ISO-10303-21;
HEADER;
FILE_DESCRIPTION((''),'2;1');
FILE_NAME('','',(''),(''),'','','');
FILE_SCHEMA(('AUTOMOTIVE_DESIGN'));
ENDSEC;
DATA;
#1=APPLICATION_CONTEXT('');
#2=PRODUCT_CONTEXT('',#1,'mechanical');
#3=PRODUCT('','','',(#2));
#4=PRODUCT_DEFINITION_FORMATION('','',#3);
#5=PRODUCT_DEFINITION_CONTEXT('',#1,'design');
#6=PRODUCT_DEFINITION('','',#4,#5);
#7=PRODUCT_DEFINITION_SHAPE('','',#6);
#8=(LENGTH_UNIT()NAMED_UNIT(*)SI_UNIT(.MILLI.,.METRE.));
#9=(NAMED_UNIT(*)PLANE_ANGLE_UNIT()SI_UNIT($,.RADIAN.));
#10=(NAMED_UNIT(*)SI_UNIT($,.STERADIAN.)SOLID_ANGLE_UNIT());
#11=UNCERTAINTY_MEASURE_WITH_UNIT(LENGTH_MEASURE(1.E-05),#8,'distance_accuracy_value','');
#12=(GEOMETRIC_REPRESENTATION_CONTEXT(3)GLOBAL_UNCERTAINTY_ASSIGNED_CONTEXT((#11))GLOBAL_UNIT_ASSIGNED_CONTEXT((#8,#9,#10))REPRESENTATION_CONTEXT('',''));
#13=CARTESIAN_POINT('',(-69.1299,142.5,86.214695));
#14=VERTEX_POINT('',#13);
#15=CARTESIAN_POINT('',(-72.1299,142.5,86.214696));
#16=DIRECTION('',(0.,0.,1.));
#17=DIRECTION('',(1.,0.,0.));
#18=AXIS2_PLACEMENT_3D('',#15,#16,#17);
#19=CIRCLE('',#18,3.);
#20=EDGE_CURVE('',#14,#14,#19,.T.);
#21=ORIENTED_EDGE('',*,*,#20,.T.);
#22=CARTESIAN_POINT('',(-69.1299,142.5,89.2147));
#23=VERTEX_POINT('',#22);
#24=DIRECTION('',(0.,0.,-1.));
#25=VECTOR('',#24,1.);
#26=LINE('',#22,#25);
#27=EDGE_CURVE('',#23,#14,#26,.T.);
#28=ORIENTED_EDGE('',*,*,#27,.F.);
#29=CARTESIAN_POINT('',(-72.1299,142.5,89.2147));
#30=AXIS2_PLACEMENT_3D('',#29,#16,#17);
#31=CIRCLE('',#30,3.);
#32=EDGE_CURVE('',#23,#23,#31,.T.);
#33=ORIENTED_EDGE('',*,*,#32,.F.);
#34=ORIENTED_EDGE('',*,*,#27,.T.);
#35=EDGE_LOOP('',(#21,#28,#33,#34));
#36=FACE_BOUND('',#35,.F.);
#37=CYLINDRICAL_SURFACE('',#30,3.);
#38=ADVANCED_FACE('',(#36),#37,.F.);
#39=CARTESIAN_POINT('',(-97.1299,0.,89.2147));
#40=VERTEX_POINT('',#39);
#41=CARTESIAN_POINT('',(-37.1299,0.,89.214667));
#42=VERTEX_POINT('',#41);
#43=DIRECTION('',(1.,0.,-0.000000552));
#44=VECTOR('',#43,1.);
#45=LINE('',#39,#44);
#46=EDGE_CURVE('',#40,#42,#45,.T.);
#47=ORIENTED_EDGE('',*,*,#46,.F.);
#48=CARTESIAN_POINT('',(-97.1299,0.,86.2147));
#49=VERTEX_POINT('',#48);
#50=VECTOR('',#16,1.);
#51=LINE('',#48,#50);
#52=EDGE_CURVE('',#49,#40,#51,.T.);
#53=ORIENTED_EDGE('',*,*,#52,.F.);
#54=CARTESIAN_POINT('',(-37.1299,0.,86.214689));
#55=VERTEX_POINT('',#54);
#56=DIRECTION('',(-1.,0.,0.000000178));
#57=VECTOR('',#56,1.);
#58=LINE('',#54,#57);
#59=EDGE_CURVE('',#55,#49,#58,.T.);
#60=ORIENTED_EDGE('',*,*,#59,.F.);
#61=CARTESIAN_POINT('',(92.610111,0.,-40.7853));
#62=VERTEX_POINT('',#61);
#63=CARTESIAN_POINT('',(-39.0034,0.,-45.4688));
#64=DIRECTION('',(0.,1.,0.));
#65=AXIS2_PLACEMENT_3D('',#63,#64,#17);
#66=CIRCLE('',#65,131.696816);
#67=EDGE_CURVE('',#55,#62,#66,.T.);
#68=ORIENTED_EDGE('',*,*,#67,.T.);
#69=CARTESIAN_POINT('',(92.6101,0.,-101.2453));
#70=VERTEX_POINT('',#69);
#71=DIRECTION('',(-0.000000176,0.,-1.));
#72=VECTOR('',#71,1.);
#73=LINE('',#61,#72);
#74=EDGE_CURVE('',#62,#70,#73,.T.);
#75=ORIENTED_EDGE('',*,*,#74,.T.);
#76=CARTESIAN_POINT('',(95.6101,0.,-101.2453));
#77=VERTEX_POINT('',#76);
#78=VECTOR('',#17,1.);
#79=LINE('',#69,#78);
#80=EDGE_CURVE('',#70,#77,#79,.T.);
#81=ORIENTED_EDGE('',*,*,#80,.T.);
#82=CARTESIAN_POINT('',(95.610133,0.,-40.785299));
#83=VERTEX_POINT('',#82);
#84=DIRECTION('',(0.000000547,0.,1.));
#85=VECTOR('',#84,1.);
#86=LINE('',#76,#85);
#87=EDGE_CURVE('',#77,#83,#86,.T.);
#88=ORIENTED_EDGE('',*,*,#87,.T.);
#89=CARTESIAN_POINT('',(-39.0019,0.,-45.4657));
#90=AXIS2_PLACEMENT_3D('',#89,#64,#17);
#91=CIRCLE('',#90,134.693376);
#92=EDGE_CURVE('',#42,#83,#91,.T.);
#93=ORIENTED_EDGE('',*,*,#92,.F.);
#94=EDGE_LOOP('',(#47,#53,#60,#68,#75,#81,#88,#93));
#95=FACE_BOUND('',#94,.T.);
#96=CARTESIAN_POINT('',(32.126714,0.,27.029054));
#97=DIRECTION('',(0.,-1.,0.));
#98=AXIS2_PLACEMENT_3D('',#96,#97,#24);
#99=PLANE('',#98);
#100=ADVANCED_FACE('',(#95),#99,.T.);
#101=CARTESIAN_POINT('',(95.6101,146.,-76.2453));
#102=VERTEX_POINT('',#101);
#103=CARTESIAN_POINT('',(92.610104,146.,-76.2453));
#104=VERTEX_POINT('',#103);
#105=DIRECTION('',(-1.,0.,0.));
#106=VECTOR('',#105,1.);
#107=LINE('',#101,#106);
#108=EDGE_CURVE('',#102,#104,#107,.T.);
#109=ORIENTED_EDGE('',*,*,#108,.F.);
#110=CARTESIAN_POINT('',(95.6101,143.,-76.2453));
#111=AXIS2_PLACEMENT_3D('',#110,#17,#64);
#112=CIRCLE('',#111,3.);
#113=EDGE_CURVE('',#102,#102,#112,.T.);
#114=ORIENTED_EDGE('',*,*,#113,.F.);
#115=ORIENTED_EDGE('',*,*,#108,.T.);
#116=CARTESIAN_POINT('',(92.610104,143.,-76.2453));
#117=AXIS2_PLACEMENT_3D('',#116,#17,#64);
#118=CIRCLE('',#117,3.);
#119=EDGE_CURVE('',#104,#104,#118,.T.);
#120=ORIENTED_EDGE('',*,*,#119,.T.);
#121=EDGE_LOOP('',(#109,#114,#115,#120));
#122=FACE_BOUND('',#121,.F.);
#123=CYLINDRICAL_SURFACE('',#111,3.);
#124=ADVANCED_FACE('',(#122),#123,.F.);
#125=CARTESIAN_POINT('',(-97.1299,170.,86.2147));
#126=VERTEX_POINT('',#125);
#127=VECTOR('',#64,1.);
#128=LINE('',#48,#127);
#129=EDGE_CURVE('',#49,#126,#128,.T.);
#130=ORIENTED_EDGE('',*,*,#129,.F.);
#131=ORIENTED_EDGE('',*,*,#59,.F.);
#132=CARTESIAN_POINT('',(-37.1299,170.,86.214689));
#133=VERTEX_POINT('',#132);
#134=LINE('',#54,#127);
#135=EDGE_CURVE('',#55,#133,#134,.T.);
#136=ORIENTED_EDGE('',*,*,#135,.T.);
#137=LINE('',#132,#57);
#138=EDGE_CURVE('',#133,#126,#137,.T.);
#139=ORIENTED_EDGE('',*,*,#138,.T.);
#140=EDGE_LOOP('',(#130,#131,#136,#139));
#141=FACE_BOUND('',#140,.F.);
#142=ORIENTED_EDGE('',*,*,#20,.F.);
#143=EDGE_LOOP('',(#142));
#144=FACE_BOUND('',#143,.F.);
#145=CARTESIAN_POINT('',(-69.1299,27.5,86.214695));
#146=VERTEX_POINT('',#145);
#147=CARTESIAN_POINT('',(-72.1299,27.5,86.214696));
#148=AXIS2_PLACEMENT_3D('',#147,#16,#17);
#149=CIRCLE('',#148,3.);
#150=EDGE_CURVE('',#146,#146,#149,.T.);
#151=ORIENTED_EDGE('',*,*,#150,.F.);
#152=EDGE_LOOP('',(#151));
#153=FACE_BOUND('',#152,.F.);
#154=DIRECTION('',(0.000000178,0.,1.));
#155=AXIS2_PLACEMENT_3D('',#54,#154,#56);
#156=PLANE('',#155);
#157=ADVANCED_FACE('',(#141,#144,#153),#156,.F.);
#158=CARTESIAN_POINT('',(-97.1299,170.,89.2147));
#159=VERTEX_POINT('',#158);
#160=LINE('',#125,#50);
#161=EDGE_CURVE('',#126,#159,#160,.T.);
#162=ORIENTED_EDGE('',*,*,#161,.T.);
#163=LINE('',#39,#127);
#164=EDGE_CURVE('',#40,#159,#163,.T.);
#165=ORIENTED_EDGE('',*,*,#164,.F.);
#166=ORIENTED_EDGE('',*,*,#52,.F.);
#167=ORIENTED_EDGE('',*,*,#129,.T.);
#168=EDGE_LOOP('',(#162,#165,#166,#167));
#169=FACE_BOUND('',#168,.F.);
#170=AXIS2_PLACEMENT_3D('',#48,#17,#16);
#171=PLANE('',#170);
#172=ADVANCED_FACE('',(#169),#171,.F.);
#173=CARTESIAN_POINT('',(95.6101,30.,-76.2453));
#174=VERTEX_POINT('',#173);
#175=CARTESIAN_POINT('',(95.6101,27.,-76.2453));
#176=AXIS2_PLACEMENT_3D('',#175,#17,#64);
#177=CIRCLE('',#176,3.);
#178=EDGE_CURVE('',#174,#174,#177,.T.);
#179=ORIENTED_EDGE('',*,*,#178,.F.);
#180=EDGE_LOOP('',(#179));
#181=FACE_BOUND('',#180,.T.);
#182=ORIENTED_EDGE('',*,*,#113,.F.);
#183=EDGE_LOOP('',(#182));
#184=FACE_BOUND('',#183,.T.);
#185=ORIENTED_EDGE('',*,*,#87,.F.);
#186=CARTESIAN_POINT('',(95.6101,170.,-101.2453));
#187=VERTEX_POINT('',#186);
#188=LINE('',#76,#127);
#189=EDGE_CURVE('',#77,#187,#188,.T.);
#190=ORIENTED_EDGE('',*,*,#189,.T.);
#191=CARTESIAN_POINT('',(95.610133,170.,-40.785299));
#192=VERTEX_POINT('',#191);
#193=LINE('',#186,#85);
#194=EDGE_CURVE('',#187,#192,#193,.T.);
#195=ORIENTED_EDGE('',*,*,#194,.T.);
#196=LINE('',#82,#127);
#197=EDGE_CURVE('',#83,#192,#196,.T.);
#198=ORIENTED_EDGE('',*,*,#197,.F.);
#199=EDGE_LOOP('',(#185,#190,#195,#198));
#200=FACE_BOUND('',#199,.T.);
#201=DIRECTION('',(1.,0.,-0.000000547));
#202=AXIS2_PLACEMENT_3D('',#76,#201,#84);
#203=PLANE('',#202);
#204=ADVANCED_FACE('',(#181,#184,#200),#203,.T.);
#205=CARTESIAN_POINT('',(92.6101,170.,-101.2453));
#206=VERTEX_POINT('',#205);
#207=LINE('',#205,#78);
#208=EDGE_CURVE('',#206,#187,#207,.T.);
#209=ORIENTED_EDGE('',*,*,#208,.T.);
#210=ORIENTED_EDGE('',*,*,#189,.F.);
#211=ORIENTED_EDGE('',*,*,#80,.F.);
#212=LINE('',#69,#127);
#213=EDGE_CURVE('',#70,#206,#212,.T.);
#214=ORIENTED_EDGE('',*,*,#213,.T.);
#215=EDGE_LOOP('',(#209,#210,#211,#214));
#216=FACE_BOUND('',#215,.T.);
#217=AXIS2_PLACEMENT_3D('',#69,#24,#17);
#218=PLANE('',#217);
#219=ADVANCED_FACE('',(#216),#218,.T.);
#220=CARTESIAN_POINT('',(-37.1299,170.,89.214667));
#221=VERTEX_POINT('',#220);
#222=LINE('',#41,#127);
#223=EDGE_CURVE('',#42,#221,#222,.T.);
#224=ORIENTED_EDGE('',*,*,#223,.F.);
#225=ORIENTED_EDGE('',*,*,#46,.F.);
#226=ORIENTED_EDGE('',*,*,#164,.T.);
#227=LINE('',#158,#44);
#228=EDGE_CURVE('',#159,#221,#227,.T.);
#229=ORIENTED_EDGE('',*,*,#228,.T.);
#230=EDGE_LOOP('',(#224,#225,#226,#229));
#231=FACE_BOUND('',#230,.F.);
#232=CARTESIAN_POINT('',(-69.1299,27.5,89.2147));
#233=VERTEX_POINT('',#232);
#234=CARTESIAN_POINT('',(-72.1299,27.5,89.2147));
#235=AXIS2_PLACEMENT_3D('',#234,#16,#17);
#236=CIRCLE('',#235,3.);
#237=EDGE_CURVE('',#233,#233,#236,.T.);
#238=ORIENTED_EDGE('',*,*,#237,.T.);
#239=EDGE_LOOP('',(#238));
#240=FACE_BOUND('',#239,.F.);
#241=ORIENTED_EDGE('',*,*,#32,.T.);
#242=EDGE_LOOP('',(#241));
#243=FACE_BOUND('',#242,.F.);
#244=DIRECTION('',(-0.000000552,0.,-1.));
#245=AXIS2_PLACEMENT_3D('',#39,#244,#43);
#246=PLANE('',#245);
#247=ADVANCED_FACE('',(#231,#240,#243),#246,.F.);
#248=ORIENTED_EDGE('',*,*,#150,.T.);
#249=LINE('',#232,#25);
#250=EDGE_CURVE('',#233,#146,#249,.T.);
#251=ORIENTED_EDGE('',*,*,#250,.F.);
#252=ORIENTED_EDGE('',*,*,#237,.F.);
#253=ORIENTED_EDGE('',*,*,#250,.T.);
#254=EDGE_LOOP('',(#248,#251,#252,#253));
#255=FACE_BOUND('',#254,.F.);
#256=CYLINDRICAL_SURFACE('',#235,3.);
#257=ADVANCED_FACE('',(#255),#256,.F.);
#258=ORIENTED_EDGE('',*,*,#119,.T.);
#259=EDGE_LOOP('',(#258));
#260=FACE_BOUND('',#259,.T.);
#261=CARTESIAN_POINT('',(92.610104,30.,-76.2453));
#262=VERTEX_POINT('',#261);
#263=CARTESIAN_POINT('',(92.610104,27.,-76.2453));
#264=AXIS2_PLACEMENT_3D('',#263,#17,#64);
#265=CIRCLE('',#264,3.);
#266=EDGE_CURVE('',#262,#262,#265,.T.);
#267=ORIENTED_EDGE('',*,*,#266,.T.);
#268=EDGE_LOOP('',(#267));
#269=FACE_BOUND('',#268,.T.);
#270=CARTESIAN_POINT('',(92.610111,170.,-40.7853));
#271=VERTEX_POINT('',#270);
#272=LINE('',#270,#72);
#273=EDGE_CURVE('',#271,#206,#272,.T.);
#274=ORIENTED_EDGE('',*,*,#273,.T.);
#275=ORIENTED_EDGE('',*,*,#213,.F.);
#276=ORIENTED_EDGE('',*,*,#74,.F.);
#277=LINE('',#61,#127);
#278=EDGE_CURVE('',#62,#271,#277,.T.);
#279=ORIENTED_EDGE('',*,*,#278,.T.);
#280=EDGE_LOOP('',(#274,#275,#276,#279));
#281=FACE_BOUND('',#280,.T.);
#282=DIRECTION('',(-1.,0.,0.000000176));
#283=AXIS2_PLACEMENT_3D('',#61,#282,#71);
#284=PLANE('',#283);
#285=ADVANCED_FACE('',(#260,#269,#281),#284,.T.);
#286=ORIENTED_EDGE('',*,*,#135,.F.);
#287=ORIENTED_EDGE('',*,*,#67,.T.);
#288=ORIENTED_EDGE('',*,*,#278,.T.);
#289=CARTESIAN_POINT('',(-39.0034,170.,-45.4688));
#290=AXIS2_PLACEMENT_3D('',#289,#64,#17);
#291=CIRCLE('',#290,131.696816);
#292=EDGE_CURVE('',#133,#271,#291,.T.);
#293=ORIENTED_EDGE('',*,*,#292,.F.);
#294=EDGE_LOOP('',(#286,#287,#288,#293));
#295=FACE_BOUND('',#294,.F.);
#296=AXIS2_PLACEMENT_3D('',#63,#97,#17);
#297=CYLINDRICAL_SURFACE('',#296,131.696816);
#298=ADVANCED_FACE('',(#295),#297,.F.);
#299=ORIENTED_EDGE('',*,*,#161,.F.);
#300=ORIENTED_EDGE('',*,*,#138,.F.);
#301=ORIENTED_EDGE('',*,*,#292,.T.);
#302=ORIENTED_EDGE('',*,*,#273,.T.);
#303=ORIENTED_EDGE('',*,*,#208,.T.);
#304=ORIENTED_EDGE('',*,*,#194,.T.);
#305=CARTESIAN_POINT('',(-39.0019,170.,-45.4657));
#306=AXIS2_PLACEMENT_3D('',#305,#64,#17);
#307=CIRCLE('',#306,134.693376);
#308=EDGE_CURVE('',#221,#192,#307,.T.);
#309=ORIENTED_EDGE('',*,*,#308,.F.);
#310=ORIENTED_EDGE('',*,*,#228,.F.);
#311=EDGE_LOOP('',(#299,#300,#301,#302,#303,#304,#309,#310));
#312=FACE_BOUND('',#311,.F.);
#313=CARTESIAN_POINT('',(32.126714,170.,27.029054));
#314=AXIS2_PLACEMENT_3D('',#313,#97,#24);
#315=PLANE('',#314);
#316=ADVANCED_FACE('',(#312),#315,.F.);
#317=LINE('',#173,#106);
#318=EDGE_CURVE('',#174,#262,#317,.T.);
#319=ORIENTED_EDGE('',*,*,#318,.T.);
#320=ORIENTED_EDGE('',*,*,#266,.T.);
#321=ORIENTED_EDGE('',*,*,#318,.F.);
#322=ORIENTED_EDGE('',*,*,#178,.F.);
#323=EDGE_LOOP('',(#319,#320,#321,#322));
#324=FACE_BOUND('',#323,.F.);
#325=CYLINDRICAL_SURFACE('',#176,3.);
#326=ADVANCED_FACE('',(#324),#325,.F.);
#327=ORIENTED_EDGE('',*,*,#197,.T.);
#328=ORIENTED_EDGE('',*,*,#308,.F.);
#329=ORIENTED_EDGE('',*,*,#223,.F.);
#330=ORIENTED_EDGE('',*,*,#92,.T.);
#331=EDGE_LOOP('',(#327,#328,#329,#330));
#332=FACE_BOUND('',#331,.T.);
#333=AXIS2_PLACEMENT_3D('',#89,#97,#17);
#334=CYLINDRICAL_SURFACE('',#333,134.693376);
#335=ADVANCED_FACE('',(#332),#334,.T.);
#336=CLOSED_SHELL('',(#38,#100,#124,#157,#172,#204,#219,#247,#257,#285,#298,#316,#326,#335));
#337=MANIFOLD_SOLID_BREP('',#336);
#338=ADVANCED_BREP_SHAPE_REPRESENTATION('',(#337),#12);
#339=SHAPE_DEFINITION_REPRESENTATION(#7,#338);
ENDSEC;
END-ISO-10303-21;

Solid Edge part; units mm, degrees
sketch "Sketch1" plane through (0, 0, 0) normal (0, -1, 0) x (1, 0, 0)
  arc A0 (-37.1299, 86.2147) -> (92.6101, -40.7853) centre (-39.0034, -45.4688) cw
  line L0 (92.6101, -40.7853) -> (92.6101, -101.2453)
  line L1 (92.6101, -101.2453) -> (95.6101, -101.2453)
  line L2 (95.6101, -101.2453) -> (95.6101, -40.7853)
  arc A1 (-37.1299, 89.2147) -> (95.6101, -40.7853) centre (-39.0019, -45.4657) cw
  line L3 (-97.1299, 89.2147) -> (-37.1299, 89.2147)
  line L4 (-97.1299, 86.2147) -> (-97.1299, 89.2147)
  line L5 (-37.1299, 86.2147) -> (-97.1299, 86.2147)
  dimension "D1" = 129.74
  dimension "D2" = 127
  dimension "D3" = 60
  dimension "D4" = 60.46
  dimension "D5" = 3
  dimension "D6" = 3
  dimension "D7" = 3
extrude "Protrusion1" add sketch "Sketch1" against normal blind 170
sketch "Sketch2" plane through (-67.1299, 85, 89.2147) normal (0, 0, 1) x (1, 0, 0)
  circle A0 centre (-5, 57.5) radius 3
  circle A1 centre (-5, -57.5) radius 3
  dimension "D1" = 25
  dimension "D2" = 6
  dimension "D3" = 115
extrude "Cutout1" cut sketch "Sketch2" against normal through all
sketch "Sketch3" plane through (95.6101, 85, -66.0153) normal (1, 0, 0) x (0, 1, 0)
  circle A0 centre (58, -10.23) radius 3
  circle A1 centre (-58, -10.23) radius 3
  dimension "D1" = 116
  dimension "D2" = 6
  dimension "D3" = 6
  dimension "D4" = 25
extrude "Cutout2" cut sketch "Sketch3" against normal through all
properties material "Nylon, allgemein"
